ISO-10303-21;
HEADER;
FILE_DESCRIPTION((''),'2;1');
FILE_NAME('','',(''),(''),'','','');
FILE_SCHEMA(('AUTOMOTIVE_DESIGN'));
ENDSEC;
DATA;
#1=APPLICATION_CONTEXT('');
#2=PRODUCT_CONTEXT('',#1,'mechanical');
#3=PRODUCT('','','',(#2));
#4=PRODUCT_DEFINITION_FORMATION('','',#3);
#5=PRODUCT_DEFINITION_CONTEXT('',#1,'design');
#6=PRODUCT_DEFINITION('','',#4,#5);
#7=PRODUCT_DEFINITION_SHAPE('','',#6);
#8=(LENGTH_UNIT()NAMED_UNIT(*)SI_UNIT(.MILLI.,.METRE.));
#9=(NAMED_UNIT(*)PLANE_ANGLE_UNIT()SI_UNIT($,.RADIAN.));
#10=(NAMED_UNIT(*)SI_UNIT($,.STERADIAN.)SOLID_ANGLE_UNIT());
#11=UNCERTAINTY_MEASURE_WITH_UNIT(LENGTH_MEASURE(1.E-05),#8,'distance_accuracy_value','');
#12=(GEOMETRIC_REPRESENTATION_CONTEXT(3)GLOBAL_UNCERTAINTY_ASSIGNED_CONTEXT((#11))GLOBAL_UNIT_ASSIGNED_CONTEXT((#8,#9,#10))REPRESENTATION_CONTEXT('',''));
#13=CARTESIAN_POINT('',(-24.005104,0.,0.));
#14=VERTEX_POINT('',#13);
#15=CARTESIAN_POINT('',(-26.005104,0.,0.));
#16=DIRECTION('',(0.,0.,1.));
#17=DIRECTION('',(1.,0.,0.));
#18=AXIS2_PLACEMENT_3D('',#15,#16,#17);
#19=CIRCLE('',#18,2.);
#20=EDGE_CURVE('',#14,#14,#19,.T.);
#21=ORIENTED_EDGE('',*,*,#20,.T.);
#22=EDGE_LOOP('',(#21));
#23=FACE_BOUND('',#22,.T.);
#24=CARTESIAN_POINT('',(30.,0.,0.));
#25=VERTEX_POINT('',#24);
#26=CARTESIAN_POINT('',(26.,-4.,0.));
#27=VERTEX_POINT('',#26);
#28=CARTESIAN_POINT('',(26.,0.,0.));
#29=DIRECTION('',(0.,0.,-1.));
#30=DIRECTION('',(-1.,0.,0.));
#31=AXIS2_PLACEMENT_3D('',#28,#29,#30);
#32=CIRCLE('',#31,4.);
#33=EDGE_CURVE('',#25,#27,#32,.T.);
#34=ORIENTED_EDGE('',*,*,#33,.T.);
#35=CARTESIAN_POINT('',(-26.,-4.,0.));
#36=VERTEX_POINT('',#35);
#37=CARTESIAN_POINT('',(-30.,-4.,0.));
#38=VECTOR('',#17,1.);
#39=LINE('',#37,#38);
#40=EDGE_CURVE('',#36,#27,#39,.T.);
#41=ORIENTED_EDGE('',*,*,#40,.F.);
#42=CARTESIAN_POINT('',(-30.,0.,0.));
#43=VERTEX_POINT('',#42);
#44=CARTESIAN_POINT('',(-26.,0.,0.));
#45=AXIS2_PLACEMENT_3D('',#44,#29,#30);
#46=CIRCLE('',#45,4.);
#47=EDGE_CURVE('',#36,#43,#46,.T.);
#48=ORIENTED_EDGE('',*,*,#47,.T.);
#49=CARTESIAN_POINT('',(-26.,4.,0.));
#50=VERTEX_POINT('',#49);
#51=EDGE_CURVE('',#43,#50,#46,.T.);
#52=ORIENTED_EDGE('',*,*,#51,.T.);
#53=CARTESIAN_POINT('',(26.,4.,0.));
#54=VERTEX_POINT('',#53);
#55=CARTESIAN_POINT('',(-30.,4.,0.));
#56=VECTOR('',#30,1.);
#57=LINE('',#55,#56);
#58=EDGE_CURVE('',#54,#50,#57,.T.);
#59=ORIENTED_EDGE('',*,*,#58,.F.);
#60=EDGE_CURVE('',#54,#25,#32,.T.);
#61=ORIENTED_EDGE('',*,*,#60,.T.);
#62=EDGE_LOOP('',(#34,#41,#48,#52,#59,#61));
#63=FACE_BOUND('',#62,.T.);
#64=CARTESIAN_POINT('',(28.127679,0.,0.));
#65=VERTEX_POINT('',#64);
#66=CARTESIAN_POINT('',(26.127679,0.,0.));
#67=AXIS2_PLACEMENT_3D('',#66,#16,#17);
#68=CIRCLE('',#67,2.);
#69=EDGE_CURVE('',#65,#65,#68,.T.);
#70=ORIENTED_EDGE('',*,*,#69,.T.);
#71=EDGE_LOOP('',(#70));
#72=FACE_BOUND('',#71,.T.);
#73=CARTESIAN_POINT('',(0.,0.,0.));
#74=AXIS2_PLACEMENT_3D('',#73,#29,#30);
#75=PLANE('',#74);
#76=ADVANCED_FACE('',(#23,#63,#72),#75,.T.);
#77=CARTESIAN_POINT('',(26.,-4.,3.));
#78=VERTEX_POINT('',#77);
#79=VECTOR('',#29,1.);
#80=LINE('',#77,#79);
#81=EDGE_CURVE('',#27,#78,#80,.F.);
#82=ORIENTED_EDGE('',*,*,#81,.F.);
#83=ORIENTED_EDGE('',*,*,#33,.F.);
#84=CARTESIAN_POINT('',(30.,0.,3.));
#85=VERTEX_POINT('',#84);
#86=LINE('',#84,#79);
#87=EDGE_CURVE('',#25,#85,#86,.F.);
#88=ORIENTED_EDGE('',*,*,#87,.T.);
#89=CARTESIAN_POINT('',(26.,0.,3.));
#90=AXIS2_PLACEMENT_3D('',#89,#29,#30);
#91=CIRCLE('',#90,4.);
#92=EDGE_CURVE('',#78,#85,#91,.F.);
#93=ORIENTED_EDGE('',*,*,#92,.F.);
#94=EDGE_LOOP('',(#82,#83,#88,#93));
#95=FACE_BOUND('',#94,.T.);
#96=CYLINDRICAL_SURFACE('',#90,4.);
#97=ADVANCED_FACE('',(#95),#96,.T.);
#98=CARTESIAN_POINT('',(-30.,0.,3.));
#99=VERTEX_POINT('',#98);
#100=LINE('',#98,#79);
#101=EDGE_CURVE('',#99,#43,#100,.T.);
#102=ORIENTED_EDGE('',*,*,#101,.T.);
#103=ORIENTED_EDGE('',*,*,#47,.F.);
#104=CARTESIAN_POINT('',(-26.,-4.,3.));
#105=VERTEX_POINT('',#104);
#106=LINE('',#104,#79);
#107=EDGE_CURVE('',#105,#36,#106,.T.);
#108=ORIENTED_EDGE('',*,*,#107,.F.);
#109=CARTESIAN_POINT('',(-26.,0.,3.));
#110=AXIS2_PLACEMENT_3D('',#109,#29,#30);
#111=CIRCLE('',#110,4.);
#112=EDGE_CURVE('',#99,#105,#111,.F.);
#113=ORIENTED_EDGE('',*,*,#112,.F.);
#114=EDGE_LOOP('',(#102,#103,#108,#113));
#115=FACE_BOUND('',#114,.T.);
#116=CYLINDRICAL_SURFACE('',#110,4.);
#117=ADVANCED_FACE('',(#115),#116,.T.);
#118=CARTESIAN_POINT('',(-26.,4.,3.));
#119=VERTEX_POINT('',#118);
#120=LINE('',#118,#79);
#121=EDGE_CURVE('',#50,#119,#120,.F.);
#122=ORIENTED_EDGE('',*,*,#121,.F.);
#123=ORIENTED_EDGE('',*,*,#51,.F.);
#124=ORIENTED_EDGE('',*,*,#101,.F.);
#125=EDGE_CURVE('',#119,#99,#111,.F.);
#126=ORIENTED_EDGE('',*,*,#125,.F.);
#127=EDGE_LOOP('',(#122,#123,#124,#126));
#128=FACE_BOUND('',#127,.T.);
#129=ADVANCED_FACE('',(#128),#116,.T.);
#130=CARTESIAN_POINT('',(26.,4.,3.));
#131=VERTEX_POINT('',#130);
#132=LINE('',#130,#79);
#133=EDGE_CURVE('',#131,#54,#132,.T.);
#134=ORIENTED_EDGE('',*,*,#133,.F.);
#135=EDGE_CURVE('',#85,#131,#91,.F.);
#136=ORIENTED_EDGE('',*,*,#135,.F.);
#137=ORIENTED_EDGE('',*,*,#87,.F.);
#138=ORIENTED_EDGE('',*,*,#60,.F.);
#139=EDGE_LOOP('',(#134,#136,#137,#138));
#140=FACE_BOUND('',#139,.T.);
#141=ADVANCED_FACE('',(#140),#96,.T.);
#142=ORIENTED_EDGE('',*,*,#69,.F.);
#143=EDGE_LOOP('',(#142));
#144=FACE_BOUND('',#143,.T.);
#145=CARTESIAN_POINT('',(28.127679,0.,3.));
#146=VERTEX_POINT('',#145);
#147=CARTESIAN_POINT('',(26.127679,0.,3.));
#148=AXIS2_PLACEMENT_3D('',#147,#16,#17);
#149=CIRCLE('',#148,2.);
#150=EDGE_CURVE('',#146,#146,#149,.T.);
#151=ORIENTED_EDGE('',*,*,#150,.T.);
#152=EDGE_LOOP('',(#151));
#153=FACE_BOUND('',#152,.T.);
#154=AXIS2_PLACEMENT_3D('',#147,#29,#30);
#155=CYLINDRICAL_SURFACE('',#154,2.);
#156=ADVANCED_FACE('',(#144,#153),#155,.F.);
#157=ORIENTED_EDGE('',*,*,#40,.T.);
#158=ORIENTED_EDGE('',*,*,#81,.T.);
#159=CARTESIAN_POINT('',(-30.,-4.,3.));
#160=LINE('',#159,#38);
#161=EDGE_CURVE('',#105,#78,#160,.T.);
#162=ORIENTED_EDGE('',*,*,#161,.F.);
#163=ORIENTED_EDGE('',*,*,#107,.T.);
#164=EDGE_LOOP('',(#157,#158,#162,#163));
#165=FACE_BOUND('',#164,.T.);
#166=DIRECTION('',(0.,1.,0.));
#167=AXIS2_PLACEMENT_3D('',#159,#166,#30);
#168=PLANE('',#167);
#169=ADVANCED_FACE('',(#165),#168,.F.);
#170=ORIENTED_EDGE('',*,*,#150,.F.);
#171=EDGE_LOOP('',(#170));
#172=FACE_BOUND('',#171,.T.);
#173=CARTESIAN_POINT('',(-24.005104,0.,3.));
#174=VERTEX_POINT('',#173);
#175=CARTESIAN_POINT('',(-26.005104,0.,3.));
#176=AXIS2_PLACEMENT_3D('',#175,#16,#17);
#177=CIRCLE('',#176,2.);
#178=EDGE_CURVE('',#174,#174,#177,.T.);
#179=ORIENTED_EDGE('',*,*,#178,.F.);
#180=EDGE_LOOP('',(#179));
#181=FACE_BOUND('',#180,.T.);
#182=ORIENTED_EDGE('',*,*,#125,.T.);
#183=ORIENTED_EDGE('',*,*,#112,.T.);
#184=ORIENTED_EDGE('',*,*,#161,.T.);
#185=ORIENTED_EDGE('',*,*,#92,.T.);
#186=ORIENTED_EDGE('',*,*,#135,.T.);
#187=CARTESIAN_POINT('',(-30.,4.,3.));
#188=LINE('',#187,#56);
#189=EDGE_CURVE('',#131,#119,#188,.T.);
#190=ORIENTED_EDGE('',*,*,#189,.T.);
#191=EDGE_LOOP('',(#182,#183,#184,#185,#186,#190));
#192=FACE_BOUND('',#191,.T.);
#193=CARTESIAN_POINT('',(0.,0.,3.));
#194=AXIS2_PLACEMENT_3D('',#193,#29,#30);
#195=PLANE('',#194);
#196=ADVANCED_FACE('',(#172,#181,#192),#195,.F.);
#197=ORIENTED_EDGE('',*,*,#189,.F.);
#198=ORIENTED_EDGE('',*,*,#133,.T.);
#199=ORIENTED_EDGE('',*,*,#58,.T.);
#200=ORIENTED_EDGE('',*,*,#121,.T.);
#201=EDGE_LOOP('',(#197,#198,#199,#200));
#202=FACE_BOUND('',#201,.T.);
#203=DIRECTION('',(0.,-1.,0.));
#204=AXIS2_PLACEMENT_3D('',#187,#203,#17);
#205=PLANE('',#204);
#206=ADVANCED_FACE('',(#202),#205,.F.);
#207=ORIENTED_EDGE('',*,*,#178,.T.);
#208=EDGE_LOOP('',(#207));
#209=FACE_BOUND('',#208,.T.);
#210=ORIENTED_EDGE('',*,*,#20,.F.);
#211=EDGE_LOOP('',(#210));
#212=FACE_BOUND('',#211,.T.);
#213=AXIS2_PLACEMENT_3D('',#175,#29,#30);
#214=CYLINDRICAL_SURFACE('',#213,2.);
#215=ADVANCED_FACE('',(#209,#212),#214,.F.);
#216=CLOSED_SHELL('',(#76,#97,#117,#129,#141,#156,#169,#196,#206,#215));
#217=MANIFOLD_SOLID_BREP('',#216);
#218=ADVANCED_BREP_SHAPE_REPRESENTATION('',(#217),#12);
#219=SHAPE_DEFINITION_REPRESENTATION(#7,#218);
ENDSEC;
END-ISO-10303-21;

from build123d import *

# Parameters (mm, degrees)
SKETCH_1_W      = 60
SKETCH_1_H      = 8
SKETCH_1_R      = 2
EXTRUDE_1_DEPTH = 3
FILLET_2_R      = 4


with BuildPart() as part:
    # 草图1 → 凸台-拉伸1 (new body)
    with BuildSketch(Plane.XY):
        Rectangle(SKETCH_1_W, SKETCH_1_H)
        with Locations((-26.005104264, 0)):
            Circle(SKETCH_1_R, mode=Mode.SUBTRACT)
        with Locations((26.127679476, 0)):
            Circle(SKETCH_1_R, mode=Mode.SUBTRACT)
    extrude(amount=EXTRUDE_1_DEPTH)

    # 圆角2
    fillet_2_edges = [part.edges().sort_by_distance(p)[0] for p in [
        (30, -4, 1.5),
        (30, 4, 1.5),
        (-30, -4, 1.5),
        (-30, 4, 1.5),
    ]]
    fillet(fillet_2_edges, radius=FILLET_2_R - 0.0001)  # a hair under: the kernel refuses the full size


solid = part.part
